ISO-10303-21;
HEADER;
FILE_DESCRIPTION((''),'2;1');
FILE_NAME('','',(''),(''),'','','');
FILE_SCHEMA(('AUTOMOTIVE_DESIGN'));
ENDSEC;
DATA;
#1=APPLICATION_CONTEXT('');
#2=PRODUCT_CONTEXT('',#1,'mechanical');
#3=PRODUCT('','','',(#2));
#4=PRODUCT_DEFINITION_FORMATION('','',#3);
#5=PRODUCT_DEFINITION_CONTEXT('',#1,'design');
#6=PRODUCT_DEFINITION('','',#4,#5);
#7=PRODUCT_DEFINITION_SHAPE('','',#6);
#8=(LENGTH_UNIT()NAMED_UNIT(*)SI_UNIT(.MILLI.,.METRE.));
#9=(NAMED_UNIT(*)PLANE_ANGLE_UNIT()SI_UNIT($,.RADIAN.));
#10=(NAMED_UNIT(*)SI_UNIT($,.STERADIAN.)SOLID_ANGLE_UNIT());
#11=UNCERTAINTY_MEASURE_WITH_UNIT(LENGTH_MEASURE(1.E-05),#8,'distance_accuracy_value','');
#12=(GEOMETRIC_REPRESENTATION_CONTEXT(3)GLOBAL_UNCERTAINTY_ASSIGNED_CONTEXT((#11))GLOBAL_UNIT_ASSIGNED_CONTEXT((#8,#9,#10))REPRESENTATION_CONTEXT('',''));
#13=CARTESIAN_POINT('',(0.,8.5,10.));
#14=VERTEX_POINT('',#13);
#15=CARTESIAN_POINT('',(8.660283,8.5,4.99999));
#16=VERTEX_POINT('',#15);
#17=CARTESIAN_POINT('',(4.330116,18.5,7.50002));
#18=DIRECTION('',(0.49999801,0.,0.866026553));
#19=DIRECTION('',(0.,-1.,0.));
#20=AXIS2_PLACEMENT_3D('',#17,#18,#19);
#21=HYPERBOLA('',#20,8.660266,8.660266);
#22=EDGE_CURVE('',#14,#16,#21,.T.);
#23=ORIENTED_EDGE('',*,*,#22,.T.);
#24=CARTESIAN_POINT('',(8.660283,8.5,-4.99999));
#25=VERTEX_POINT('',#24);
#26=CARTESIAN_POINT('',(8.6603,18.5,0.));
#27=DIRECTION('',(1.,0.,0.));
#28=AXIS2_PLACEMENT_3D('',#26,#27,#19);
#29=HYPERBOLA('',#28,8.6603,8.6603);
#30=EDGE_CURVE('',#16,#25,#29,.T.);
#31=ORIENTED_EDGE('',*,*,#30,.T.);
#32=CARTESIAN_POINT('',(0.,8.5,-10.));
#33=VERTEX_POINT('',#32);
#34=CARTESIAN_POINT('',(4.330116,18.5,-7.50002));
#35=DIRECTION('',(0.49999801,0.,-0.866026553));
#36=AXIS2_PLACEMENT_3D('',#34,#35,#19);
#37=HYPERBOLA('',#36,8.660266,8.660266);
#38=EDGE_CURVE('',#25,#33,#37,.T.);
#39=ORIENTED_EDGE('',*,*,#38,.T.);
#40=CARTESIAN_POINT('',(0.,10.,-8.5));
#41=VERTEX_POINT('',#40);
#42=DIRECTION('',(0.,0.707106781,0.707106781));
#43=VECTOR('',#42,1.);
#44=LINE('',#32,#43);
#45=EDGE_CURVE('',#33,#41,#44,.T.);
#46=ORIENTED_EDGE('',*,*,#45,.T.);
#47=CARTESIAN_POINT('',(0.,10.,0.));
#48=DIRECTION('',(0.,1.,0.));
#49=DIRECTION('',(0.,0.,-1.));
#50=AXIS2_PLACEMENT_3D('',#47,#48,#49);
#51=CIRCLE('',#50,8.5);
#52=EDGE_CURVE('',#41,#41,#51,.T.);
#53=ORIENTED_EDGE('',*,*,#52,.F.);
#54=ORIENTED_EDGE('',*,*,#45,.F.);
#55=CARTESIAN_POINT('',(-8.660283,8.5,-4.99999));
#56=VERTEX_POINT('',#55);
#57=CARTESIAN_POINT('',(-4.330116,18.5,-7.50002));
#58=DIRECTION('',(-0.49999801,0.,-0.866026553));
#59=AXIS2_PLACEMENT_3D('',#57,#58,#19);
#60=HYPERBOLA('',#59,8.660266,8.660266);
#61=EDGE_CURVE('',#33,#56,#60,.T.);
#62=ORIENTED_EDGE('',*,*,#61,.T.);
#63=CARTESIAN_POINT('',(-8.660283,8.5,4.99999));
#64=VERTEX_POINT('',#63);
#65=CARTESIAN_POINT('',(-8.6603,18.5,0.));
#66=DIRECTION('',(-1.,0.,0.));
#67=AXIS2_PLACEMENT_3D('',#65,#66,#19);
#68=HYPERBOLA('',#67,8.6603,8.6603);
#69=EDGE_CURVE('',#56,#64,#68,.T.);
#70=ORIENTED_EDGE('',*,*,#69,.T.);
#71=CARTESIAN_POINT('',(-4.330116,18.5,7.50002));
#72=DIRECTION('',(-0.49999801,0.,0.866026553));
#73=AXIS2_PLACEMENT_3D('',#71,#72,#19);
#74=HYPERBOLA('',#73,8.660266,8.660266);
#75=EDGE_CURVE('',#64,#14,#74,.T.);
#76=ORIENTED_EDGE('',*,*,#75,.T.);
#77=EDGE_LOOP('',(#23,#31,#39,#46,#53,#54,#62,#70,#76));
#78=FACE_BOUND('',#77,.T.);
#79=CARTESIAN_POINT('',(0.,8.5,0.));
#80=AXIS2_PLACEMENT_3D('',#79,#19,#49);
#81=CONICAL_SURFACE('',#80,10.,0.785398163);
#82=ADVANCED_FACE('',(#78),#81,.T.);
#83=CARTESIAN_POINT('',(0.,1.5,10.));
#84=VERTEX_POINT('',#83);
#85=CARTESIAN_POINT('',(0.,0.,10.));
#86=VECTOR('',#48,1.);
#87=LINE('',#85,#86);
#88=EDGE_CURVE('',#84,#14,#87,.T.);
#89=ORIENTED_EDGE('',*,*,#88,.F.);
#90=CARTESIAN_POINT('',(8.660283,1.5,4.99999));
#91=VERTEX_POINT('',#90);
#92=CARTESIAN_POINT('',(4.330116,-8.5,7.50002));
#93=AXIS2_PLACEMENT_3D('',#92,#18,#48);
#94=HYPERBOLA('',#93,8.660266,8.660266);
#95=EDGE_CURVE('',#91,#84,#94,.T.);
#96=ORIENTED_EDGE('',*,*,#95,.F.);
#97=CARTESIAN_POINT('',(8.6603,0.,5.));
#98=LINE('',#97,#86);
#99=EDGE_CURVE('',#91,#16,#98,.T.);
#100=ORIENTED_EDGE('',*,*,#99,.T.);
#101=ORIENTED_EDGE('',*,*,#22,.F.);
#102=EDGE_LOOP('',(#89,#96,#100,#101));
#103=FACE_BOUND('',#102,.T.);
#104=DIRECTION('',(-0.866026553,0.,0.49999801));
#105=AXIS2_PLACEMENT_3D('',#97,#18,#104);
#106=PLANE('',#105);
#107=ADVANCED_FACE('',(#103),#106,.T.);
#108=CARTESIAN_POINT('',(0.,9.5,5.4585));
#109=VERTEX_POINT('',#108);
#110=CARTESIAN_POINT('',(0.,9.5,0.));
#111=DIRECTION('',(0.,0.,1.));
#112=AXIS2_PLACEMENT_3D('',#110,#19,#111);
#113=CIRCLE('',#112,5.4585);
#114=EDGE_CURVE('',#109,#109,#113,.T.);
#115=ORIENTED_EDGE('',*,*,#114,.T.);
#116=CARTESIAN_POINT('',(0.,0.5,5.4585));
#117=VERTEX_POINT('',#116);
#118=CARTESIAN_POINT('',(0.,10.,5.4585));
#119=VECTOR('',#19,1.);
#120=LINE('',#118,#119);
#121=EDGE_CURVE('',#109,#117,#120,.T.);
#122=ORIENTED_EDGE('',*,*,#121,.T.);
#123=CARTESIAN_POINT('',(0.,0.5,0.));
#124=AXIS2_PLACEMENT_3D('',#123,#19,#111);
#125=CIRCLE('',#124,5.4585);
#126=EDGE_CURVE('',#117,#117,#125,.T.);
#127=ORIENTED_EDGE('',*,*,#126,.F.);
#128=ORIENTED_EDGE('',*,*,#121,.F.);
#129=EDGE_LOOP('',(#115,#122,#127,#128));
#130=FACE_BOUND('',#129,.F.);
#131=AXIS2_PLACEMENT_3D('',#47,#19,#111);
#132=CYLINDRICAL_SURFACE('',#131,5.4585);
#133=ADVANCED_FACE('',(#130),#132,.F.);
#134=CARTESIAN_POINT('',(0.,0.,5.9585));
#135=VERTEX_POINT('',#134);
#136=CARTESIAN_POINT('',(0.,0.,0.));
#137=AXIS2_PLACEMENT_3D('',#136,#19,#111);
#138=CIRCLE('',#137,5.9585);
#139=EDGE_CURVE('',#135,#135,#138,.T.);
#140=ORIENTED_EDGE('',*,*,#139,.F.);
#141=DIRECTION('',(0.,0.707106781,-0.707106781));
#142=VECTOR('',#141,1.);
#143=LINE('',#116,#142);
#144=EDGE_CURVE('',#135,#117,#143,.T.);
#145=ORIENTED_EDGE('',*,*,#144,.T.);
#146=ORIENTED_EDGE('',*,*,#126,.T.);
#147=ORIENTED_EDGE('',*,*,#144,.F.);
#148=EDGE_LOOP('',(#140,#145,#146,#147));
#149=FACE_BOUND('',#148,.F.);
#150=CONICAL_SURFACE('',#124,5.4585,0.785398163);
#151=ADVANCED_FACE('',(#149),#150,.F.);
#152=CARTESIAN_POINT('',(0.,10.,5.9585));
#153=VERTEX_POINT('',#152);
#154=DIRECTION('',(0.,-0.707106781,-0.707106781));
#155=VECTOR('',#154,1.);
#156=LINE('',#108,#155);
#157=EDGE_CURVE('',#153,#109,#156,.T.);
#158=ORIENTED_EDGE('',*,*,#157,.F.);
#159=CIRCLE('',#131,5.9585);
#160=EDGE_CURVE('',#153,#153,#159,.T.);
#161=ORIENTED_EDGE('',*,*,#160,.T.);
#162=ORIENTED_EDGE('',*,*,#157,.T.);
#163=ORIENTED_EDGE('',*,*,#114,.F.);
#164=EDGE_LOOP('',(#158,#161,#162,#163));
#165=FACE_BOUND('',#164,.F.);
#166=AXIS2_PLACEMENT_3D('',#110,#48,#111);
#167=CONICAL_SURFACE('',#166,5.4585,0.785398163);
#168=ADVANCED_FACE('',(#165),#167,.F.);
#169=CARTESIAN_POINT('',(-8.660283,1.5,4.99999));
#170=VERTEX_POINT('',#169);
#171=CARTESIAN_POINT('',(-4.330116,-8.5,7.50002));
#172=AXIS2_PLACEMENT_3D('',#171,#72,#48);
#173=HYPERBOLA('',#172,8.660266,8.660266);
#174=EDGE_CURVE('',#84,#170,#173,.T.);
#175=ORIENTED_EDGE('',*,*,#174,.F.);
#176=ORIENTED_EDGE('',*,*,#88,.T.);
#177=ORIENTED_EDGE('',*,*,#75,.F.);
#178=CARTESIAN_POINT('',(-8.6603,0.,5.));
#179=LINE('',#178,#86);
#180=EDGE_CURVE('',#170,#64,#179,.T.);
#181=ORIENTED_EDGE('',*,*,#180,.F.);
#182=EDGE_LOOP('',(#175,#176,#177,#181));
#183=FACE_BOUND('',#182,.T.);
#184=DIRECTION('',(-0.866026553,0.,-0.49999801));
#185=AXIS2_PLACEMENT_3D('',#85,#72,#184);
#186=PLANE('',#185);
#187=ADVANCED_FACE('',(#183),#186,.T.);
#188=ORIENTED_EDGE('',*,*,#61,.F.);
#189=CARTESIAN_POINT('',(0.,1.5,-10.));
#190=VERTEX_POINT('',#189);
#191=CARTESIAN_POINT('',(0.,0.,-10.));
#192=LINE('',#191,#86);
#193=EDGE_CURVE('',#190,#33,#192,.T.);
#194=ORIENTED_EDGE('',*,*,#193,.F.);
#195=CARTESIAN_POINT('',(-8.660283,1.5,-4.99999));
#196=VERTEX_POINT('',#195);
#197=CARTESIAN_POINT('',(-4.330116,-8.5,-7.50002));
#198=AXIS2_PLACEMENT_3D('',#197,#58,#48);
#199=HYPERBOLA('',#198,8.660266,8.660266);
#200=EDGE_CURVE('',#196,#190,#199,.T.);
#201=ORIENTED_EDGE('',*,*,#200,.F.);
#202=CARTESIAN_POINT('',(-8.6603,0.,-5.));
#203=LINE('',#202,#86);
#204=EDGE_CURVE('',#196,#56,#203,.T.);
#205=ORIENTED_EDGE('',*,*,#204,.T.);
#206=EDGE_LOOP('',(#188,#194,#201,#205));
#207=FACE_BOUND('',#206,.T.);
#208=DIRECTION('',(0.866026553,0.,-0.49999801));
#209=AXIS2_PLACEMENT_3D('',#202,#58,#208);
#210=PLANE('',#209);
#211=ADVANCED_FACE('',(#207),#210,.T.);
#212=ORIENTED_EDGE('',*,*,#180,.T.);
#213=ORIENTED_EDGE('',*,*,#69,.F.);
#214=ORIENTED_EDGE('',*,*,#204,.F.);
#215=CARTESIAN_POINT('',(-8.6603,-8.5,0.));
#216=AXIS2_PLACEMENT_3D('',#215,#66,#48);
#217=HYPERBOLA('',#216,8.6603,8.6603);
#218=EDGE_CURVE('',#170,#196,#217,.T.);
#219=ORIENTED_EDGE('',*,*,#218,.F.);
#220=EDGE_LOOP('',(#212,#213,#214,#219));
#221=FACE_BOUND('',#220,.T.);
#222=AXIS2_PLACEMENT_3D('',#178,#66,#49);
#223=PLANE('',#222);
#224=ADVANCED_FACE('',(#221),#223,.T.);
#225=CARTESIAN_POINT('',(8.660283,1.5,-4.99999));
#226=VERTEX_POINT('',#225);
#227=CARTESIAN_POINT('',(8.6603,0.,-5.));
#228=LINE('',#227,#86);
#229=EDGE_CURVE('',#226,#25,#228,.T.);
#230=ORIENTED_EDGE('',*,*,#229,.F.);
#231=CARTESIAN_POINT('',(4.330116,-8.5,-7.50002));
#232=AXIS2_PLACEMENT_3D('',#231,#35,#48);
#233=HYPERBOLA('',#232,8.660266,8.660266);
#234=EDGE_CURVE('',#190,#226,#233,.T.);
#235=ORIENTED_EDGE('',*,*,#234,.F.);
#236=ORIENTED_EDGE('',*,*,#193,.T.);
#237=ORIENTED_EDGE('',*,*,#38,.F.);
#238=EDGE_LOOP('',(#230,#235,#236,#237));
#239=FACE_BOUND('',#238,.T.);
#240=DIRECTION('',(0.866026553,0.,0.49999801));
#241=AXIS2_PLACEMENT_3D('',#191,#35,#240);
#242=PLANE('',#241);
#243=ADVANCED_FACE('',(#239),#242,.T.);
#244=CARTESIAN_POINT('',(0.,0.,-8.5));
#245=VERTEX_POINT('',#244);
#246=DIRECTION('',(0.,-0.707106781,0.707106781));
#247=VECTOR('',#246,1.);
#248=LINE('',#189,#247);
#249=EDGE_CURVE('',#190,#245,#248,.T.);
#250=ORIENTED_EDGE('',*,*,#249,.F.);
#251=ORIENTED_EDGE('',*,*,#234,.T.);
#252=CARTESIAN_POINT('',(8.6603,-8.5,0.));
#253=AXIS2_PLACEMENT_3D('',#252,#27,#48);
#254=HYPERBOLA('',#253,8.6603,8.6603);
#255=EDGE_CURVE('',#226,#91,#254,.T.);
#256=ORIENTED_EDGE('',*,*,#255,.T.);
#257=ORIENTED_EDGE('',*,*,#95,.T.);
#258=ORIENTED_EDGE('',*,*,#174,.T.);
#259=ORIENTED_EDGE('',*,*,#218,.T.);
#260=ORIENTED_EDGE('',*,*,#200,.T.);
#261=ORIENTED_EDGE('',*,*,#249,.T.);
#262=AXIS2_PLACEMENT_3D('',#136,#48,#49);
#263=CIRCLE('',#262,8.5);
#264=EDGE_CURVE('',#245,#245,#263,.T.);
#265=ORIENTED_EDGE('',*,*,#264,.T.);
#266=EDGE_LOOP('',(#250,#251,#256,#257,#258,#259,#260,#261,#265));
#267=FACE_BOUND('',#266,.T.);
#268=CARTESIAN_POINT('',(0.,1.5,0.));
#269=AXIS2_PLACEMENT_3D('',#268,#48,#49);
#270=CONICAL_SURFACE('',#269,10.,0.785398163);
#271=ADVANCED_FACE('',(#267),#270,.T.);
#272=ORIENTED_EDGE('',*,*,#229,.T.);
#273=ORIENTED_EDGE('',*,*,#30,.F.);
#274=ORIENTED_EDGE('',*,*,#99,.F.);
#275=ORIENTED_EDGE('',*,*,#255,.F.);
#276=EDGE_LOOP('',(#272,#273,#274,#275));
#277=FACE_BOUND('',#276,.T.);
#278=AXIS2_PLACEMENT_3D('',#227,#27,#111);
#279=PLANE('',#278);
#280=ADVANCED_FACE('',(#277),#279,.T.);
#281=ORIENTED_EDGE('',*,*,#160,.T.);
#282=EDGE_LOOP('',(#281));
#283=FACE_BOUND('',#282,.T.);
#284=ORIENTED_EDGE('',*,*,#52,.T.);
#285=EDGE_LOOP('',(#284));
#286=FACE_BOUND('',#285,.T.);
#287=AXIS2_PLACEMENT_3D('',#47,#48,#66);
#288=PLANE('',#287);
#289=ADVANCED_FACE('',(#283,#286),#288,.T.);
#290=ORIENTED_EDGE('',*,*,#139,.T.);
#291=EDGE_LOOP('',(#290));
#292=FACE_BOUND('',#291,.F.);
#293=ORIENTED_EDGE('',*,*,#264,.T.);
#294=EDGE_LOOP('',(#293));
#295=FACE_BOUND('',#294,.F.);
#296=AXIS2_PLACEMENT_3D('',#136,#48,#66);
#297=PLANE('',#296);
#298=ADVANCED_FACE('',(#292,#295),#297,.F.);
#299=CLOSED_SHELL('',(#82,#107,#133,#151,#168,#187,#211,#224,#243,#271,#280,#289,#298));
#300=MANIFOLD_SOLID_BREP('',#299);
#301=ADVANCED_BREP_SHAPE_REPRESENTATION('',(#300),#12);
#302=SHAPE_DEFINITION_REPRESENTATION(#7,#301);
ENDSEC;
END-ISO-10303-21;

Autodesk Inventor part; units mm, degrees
ref_plane "YZ Plane" through (0, 0, 0) normal (1, 0, 0) x (0, 1, 0)
ref_plane "XZ Plane" through (0, 0, 0) normal (0, 1, 0) x (-1, 0, 0)
sketch "Sketch1" plane through (0, 0, 0) normal (0, 1, 0) x (-1, 0, 0)
  line L0 (0, -10) -> (-8.6603, -5)
  line L1 (-8.6603, -5) -> (-8.6603, 5)
  line L2 (-8.6603, 5) -> (0, 10)
  line L3 (0, 10) -> (8.6603, 5)
  line L4 (8.6603, 5) -> (8.6603, -5)
  line L5 (8.6603, -5) -> (0, -10)
  point P0 (0, 0)
  point P1 (0, 0)
  dimension "d1" = 20
extrude "Extrusion1" add sketch "Sketch1" along normal blind 10
sketch "Sketch2" plane through (0, 0, 0) normal (1, 0, 0) x (0, 1, 0)
  line L0 (10, -5) -> (10, -10) projected
  line L1 (10, -10) -> (8.5, -10)
  line L2 (10, -8.5) -> (10, -10)
  line L3 (8.5, -10) -> (10, -8.5)
  line L4 (-2, 0) -> (12, 0) projected
  point P0 (0, 0)
revolve "Revolution1" cut sketch "Sketch2" angle 360 about axis through (0, -10, 0) along (0, 1, 0)
ref_plane "Work Plane1" through (0, 5, 0) normal (0, 1, 0) x (1, 0, 0)
mirror "Mirror1" about plane through (0, 5, 0) normal (0, 1, 0) of "Revolution1"
sketch "Sketch3" plane through (0, 10, 0) normal (0, 1, 0) x (1, 0, 0)
  circle A0 centre (0, 0) radius 8.5 projected
hole "Hole1" at (0, 10, 0) direction (0, -1, 0) diameter 10.917 depth 29.1 tip angle 118 thread size "M12x1" class "6H" standard "ISO Metric profile"
chamfer "Chamfer1" distance 0.5 angle 45 2 edges at (0, 10, -5.4585) (0, 0, -5.4585)
properties part number "nut"
